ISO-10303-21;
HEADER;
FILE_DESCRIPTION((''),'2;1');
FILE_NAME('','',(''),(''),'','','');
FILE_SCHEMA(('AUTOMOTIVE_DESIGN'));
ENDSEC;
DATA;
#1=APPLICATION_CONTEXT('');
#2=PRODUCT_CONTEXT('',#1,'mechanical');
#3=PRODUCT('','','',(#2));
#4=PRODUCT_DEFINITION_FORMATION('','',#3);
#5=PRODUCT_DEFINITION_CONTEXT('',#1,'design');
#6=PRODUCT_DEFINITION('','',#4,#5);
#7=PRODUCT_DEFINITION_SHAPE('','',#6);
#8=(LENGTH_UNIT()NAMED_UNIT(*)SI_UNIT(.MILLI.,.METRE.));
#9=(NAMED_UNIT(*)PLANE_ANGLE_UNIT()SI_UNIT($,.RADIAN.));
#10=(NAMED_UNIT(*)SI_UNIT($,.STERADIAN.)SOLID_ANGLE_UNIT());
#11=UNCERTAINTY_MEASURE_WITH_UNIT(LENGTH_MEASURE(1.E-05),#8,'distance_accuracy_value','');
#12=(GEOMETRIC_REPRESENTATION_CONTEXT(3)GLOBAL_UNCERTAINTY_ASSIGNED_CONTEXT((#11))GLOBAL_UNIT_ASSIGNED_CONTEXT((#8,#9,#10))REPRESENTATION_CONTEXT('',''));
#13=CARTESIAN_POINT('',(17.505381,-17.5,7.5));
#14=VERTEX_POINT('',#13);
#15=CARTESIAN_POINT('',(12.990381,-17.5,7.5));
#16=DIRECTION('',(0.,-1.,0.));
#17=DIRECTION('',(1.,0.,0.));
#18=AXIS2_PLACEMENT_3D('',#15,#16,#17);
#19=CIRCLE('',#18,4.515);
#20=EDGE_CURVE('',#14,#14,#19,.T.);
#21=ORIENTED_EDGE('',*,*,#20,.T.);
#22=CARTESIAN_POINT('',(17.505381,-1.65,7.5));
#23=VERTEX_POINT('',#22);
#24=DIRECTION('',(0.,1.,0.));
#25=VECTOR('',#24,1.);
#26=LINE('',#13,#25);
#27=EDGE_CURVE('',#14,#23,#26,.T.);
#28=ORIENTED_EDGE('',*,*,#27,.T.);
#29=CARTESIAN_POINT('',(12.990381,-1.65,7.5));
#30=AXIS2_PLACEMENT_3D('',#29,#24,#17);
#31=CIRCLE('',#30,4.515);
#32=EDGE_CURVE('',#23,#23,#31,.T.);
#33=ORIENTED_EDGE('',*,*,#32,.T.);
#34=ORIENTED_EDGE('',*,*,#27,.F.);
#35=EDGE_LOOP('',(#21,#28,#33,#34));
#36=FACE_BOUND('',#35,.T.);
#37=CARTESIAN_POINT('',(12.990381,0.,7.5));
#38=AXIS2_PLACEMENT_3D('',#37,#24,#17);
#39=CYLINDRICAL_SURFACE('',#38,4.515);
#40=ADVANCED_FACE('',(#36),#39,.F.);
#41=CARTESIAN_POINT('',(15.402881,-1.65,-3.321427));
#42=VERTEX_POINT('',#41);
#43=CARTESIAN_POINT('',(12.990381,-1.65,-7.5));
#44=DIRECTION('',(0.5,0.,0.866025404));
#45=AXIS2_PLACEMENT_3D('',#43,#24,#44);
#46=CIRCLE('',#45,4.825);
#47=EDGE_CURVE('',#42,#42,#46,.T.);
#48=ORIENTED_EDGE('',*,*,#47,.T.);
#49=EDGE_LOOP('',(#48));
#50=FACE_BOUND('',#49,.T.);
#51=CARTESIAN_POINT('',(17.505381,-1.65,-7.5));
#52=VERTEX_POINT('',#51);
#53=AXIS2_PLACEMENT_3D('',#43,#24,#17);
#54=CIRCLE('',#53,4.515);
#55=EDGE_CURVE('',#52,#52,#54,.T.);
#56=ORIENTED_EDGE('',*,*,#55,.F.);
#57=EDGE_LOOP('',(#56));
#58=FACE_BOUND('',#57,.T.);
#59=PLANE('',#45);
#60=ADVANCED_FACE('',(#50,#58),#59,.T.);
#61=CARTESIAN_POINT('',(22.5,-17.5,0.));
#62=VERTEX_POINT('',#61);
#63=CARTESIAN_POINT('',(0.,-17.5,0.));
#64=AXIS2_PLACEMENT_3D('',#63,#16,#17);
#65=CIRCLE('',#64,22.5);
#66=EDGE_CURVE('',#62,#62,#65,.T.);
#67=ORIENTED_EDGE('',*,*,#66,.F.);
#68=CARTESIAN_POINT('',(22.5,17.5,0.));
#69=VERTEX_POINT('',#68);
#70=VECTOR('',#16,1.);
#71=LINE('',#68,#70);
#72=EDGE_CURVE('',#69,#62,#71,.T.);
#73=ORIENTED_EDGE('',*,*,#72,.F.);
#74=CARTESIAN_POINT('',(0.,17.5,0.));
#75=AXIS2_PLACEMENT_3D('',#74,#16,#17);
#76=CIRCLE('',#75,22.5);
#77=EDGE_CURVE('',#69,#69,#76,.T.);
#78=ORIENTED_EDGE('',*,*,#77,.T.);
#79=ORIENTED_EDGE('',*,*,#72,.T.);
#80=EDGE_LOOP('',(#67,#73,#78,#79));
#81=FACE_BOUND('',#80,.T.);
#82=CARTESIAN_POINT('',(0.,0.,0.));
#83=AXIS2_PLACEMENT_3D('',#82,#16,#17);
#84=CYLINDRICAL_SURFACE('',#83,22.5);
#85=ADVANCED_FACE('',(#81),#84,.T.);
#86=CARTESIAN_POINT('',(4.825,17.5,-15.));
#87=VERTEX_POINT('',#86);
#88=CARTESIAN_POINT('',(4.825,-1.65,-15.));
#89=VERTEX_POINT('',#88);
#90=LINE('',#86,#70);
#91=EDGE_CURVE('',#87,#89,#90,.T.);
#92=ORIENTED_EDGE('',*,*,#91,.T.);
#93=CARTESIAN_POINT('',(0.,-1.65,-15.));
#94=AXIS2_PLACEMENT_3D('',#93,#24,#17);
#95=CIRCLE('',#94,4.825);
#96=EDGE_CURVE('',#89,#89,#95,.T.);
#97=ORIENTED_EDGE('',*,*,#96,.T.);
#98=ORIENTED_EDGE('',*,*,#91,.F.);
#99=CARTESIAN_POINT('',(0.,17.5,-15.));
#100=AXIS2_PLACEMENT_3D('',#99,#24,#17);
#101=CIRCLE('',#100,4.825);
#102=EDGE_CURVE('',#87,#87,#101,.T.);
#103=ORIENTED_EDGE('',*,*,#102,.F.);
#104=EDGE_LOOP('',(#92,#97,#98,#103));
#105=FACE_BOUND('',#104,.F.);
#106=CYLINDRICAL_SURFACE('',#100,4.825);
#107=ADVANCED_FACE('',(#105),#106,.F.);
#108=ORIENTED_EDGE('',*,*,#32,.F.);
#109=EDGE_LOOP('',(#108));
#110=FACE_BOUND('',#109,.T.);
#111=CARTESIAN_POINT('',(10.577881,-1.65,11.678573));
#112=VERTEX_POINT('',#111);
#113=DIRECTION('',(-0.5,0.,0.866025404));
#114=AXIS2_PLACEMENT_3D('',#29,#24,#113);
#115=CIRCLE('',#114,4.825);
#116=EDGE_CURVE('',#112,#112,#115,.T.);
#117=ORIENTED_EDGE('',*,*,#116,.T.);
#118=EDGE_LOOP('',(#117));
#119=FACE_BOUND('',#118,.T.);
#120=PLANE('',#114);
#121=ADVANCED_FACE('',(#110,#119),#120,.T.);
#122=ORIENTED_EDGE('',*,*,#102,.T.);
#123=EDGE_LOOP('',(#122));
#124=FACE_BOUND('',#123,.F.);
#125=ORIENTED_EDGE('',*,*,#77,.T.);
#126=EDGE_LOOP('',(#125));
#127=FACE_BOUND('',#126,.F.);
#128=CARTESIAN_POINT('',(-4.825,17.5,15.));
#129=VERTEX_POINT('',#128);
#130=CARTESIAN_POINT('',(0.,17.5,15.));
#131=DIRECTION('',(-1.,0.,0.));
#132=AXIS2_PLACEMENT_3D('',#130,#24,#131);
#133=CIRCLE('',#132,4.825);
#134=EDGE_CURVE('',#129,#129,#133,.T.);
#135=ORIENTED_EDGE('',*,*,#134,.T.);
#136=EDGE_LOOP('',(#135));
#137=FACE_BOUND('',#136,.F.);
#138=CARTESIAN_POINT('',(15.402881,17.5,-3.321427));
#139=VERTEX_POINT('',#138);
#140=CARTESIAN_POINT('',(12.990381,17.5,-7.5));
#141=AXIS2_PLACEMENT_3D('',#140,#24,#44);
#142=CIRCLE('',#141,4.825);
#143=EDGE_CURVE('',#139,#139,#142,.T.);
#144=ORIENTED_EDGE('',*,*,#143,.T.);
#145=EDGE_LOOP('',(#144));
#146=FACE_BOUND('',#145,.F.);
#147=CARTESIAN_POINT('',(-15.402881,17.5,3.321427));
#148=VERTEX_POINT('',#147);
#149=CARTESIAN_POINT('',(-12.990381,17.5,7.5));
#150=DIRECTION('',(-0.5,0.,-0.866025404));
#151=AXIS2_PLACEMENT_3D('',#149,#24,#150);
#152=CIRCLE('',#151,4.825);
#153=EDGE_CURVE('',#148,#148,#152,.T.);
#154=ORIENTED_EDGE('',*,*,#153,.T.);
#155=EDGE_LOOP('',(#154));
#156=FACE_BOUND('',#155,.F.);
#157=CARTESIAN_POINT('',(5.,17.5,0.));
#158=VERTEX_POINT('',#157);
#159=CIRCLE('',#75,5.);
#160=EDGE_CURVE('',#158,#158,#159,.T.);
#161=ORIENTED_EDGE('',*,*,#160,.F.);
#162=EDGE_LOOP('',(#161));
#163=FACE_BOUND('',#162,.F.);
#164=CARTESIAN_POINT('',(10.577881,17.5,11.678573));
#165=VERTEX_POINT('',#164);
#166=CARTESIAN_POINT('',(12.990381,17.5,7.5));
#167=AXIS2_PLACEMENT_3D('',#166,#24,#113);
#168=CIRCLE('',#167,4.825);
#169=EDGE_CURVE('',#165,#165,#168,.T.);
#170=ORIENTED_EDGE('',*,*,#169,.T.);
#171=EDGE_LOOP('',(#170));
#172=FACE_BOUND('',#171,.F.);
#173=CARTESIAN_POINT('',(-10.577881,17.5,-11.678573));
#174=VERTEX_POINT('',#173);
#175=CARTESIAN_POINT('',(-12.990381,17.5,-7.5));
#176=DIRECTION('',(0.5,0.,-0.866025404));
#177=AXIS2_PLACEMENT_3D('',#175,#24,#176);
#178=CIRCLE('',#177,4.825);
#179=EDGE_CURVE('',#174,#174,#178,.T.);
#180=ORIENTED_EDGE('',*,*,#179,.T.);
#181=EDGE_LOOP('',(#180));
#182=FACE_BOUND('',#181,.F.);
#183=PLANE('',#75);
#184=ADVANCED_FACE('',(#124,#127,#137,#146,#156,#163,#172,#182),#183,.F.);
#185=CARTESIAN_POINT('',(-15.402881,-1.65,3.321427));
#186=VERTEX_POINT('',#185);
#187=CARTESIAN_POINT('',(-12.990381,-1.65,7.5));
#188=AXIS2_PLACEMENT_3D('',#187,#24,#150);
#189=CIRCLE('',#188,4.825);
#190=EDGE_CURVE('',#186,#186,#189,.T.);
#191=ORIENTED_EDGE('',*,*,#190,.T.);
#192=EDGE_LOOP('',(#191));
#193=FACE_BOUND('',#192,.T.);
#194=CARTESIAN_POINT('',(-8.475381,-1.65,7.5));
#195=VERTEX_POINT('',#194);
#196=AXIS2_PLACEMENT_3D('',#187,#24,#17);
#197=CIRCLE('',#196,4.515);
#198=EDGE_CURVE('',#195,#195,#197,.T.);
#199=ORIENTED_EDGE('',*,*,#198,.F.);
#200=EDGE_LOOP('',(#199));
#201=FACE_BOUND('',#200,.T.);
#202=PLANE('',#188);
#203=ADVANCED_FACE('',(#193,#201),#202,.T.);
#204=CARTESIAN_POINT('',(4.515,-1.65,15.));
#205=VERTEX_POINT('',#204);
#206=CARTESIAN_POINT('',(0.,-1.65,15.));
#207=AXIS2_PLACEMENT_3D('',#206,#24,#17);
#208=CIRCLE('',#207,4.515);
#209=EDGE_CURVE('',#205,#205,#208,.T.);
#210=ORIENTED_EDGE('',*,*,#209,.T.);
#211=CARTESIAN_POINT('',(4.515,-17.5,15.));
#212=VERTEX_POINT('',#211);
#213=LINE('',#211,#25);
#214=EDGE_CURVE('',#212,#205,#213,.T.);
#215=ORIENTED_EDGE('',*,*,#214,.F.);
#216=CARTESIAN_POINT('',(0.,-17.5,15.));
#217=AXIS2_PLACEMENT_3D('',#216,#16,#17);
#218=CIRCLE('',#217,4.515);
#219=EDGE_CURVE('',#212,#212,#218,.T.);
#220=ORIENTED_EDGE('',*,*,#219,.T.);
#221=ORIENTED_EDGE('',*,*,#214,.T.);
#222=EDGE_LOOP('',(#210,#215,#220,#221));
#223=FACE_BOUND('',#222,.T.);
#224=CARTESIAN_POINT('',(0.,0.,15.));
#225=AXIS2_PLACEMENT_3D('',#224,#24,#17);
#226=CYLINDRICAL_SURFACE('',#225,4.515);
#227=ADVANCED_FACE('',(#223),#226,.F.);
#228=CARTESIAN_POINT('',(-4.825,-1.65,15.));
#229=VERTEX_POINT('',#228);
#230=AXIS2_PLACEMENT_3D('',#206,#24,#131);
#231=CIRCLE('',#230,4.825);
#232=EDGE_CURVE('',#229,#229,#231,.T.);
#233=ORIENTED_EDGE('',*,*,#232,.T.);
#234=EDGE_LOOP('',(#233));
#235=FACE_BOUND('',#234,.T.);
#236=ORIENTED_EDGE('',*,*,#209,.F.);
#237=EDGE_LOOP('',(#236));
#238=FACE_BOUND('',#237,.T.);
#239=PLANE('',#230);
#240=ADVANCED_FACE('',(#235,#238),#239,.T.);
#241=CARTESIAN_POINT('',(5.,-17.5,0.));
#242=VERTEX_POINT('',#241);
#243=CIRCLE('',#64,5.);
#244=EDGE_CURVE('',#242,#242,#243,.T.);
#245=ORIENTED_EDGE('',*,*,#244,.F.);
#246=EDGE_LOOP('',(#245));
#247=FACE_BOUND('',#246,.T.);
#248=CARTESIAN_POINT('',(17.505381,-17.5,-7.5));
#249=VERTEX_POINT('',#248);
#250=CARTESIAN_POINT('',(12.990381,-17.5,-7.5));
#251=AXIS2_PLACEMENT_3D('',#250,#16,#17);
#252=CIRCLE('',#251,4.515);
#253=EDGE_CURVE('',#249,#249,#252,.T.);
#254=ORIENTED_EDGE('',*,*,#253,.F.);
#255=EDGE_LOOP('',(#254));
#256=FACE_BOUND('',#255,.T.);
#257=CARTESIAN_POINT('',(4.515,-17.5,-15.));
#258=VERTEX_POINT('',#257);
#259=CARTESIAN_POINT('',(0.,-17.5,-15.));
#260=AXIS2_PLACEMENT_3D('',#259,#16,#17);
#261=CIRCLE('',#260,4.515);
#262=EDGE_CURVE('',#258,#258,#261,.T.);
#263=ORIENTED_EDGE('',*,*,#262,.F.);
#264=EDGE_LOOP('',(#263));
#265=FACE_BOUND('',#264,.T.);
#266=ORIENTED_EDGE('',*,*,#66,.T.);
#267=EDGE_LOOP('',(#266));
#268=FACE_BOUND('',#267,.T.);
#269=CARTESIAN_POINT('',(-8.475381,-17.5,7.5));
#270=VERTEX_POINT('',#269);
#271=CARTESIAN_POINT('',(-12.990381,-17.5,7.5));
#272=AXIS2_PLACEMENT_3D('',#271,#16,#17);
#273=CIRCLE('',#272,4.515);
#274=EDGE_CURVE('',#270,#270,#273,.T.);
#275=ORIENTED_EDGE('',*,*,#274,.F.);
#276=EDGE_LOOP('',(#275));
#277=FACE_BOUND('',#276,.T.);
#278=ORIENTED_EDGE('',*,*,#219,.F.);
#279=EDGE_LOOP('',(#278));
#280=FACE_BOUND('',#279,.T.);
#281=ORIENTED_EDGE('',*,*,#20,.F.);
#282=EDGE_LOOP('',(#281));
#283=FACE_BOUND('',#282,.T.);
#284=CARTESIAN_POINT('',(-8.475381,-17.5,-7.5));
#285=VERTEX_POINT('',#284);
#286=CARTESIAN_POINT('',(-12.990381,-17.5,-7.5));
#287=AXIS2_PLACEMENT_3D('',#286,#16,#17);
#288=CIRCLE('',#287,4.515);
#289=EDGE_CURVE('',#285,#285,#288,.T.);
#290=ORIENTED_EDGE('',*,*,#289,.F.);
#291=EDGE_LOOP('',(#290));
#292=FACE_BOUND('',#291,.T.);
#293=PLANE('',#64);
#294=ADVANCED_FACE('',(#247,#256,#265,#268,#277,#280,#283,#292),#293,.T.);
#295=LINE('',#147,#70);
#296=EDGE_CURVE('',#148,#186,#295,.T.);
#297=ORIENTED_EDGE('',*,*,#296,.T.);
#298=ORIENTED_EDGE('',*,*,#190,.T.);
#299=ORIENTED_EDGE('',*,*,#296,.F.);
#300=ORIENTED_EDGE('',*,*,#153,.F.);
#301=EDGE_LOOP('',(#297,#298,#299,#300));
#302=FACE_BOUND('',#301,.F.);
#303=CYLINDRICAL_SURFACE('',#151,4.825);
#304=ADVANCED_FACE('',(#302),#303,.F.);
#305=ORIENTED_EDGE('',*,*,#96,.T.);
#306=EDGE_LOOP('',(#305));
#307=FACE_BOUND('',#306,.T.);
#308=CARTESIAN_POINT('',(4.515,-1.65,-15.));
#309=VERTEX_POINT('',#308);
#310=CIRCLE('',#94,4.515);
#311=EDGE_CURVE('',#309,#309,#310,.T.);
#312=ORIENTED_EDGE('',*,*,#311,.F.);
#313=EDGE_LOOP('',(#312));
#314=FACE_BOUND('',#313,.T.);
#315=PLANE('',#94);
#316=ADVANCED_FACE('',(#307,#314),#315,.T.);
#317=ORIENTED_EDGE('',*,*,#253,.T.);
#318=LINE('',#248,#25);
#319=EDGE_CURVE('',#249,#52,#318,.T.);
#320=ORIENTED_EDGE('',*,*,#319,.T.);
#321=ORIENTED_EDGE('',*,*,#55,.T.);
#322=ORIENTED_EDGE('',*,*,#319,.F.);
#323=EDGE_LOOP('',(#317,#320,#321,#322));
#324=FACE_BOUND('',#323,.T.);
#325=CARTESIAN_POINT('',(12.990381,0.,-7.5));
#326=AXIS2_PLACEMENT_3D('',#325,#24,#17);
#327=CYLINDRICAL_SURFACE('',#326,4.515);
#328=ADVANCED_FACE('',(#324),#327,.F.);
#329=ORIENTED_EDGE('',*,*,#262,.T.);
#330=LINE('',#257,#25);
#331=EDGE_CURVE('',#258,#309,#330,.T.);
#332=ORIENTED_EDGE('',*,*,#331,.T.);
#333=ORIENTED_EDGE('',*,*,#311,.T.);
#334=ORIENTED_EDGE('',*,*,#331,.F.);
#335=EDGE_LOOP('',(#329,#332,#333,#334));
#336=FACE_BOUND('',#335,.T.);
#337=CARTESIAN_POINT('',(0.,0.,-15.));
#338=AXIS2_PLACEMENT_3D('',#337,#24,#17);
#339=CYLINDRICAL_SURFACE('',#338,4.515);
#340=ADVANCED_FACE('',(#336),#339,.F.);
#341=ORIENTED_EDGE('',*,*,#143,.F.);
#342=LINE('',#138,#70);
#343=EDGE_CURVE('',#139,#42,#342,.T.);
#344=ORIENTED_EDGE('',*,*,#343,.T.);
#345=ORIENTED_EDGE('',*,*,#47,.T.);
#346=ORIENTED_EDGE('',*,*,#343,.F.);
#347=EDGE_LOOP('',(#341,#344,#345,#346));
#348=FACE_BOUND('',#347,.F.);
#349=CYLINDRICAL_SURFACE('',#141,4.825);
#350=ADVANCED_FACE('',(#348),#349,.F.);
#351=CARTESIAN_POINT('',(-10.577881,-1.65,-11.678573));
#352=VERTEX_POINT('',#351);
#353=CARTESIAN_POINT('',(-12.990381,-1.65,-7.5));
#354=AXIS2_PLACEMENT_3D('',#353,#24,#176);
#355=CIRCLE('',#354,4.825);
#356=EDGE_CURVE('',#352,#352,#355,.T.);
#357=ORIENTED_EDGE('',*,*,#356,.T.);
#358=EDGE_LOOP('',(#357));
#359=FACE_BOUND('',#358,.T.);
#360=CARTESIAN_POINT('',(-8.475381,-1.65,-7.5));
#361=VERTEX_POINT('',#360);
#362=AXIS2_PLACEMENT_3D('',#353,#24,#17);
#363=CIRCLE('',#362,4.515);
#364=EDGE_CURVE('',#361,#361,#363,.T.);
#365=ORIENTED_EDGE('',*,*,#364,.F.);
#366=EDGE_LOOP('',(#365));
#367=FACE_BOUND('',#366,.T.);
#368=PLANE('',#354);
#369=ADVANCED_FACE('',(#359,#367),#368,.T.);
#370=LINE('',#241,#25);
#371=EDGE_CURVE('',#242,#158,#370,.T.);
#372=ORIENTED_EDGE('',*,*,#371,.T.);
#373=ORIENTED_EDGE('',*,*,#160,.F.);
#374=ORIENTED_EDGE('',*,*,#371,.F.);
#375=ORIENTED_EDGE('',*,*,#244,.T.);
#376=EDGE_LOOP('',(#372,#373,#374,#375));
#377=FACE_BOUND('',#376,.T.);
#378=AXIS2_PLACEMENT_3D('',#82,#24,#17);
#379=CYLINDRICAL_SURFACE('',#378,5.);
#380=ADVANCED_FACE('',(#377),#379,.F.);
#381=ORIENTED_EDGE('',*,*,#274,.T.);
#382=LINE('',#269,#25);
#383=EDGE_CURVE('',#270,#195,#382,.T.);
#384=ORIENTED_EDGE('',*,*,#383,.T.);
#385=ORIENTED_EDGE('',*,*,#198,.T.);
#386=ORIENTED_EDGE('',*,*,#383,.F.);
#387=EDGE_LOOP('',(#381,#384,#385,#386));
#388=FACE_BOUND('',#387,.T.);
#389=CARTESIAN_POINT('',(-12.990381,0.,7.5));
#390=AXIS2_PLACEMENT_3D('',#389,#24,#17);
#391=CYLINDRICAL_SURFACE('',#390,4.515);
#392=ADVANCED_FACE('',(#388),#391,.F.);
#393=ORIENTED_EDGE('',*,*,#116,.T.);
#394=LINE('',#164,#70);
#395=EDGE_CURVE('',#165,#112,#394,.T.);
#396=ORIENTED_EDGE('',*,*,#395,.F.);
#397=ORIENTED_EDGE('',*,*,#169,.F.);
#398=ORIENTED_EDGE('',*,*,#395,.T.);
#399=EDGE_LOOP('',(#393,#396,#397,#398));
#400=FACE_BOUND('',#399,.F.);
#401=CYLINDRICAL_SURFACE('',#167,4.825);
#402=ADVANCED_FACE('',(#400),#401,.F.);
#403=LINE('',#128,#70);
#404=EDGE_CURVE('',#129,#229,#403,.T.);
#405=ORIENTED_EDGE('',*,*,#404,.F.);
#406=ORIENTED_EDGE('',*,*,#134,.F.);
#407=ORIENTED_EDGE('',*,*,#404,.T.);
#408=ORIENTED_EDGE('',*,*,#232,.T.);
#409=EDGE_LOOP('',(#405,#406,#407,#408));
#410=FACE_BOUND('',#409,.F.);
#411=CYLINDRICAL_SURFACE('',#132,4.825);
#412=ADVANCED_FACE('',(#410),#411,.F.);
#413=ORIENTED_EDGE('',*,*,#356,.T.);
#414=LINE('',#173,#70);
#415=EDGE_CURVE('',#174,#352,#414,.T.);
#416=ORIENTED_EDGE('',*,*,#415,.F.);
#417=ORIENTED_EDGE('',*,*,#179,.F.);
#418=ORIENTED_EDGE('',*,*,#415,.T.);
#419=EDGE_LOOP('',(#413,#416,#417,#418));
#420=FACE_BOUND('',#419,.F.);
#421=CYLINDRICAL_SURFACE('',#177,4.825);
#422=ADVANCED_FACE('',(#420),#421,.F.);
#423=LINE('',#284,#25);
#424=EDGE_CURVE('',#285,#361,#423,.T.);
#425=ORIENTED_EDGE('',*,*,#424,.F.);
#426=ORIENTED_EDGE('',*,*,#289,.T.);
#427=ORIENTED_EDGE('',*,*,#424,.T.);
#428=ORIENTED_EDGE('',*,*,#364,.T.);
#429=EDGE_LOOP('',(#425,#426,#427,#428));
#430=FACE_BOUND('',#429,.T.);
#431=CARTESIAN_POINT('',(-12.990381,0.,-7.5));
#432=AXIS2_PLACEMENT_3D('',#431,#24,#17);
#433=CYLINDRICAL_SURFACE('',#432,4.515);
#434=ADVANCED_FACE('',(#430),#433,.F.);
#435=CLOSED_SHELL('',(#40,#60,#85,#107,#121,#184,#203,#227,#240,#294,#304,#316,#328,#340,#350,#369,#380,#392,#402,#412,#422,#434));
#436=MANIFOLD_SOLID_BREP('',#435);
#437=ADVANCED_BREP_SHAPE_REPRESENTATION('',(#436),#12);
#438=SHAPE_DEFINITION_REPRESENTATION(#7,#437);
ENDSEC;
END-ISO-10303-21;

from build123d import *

# Parameters (mm, degrees)
F0_R            = 22.5
F0_R_2          = 4.515
F0_R_3          = 5
F1_DEPTH        = 17.5
F2_R            = 4.825
F3_DEPTH        = 19.15
F3_COPIES_COUNT = 6


# Not quite as in the source:
# - a pattern or mirror of a feature is missing from the dataset's text; its kind, count and spacing are read off the source's solid


with BuildPart() as f1:
    # F0 (on Front) → F1 (new body, symmetric)
    with BuildSketch(Plane.XZ):
        Circle(F0_R)
        with Locations((-12.9903810568, -7.5)):
            Circle(F0_R_2, mode=Mode.SUBTRACT)
        with Locations((0, -15)):
            Circle(F0_R_2, mode=Mode.SUBTRACT)
        with Locations((12.9903810568, -7.5)):
            Circle(F0_R_2, mode=Mode.SUBTRACT)
        with Locations((-12.9903810568, 7.5)):
            Circle(F0_R_2, mode=Mode.SUBTRACT)
        Circle(F0_R_3, mode=Mode.SUBTRACT)
        with Locations((12.9903810568, 7.5)):
            Circle(F0_R_2, mode=Mode.SUBTRACT)
        with Locations((0, 15)):
            Circle(F0_R_2, mode=Mode.SUBTRACT)
    extrude(amount=F1_DEPTH, both=True)

    # F2 (on face) → F3 (cut)
    with BuildSketch(Plane(origin=(0, 17.5, 0), x_dir=(-1, 0, 0), z_dir=(0, 1, 0))):
        with Locations((0, 15)):
            Circle(F2_R)
    f3 = extrude(amount=-F3_DEPTH, mode=Mode.SUBTRACT)

    # F3_copies: F3 ×6 about axis
    f3_copies_axis = Axis((0, 0, 0), (0, 1, 0))
    for i in range(1, F3_COPIES_COUNT):
        add(f3.rotate(f3_copies_axis, i * 360 / F3_COPIES_COUNT), mode=Mode.SUBTRACT)


solid = f1.part
